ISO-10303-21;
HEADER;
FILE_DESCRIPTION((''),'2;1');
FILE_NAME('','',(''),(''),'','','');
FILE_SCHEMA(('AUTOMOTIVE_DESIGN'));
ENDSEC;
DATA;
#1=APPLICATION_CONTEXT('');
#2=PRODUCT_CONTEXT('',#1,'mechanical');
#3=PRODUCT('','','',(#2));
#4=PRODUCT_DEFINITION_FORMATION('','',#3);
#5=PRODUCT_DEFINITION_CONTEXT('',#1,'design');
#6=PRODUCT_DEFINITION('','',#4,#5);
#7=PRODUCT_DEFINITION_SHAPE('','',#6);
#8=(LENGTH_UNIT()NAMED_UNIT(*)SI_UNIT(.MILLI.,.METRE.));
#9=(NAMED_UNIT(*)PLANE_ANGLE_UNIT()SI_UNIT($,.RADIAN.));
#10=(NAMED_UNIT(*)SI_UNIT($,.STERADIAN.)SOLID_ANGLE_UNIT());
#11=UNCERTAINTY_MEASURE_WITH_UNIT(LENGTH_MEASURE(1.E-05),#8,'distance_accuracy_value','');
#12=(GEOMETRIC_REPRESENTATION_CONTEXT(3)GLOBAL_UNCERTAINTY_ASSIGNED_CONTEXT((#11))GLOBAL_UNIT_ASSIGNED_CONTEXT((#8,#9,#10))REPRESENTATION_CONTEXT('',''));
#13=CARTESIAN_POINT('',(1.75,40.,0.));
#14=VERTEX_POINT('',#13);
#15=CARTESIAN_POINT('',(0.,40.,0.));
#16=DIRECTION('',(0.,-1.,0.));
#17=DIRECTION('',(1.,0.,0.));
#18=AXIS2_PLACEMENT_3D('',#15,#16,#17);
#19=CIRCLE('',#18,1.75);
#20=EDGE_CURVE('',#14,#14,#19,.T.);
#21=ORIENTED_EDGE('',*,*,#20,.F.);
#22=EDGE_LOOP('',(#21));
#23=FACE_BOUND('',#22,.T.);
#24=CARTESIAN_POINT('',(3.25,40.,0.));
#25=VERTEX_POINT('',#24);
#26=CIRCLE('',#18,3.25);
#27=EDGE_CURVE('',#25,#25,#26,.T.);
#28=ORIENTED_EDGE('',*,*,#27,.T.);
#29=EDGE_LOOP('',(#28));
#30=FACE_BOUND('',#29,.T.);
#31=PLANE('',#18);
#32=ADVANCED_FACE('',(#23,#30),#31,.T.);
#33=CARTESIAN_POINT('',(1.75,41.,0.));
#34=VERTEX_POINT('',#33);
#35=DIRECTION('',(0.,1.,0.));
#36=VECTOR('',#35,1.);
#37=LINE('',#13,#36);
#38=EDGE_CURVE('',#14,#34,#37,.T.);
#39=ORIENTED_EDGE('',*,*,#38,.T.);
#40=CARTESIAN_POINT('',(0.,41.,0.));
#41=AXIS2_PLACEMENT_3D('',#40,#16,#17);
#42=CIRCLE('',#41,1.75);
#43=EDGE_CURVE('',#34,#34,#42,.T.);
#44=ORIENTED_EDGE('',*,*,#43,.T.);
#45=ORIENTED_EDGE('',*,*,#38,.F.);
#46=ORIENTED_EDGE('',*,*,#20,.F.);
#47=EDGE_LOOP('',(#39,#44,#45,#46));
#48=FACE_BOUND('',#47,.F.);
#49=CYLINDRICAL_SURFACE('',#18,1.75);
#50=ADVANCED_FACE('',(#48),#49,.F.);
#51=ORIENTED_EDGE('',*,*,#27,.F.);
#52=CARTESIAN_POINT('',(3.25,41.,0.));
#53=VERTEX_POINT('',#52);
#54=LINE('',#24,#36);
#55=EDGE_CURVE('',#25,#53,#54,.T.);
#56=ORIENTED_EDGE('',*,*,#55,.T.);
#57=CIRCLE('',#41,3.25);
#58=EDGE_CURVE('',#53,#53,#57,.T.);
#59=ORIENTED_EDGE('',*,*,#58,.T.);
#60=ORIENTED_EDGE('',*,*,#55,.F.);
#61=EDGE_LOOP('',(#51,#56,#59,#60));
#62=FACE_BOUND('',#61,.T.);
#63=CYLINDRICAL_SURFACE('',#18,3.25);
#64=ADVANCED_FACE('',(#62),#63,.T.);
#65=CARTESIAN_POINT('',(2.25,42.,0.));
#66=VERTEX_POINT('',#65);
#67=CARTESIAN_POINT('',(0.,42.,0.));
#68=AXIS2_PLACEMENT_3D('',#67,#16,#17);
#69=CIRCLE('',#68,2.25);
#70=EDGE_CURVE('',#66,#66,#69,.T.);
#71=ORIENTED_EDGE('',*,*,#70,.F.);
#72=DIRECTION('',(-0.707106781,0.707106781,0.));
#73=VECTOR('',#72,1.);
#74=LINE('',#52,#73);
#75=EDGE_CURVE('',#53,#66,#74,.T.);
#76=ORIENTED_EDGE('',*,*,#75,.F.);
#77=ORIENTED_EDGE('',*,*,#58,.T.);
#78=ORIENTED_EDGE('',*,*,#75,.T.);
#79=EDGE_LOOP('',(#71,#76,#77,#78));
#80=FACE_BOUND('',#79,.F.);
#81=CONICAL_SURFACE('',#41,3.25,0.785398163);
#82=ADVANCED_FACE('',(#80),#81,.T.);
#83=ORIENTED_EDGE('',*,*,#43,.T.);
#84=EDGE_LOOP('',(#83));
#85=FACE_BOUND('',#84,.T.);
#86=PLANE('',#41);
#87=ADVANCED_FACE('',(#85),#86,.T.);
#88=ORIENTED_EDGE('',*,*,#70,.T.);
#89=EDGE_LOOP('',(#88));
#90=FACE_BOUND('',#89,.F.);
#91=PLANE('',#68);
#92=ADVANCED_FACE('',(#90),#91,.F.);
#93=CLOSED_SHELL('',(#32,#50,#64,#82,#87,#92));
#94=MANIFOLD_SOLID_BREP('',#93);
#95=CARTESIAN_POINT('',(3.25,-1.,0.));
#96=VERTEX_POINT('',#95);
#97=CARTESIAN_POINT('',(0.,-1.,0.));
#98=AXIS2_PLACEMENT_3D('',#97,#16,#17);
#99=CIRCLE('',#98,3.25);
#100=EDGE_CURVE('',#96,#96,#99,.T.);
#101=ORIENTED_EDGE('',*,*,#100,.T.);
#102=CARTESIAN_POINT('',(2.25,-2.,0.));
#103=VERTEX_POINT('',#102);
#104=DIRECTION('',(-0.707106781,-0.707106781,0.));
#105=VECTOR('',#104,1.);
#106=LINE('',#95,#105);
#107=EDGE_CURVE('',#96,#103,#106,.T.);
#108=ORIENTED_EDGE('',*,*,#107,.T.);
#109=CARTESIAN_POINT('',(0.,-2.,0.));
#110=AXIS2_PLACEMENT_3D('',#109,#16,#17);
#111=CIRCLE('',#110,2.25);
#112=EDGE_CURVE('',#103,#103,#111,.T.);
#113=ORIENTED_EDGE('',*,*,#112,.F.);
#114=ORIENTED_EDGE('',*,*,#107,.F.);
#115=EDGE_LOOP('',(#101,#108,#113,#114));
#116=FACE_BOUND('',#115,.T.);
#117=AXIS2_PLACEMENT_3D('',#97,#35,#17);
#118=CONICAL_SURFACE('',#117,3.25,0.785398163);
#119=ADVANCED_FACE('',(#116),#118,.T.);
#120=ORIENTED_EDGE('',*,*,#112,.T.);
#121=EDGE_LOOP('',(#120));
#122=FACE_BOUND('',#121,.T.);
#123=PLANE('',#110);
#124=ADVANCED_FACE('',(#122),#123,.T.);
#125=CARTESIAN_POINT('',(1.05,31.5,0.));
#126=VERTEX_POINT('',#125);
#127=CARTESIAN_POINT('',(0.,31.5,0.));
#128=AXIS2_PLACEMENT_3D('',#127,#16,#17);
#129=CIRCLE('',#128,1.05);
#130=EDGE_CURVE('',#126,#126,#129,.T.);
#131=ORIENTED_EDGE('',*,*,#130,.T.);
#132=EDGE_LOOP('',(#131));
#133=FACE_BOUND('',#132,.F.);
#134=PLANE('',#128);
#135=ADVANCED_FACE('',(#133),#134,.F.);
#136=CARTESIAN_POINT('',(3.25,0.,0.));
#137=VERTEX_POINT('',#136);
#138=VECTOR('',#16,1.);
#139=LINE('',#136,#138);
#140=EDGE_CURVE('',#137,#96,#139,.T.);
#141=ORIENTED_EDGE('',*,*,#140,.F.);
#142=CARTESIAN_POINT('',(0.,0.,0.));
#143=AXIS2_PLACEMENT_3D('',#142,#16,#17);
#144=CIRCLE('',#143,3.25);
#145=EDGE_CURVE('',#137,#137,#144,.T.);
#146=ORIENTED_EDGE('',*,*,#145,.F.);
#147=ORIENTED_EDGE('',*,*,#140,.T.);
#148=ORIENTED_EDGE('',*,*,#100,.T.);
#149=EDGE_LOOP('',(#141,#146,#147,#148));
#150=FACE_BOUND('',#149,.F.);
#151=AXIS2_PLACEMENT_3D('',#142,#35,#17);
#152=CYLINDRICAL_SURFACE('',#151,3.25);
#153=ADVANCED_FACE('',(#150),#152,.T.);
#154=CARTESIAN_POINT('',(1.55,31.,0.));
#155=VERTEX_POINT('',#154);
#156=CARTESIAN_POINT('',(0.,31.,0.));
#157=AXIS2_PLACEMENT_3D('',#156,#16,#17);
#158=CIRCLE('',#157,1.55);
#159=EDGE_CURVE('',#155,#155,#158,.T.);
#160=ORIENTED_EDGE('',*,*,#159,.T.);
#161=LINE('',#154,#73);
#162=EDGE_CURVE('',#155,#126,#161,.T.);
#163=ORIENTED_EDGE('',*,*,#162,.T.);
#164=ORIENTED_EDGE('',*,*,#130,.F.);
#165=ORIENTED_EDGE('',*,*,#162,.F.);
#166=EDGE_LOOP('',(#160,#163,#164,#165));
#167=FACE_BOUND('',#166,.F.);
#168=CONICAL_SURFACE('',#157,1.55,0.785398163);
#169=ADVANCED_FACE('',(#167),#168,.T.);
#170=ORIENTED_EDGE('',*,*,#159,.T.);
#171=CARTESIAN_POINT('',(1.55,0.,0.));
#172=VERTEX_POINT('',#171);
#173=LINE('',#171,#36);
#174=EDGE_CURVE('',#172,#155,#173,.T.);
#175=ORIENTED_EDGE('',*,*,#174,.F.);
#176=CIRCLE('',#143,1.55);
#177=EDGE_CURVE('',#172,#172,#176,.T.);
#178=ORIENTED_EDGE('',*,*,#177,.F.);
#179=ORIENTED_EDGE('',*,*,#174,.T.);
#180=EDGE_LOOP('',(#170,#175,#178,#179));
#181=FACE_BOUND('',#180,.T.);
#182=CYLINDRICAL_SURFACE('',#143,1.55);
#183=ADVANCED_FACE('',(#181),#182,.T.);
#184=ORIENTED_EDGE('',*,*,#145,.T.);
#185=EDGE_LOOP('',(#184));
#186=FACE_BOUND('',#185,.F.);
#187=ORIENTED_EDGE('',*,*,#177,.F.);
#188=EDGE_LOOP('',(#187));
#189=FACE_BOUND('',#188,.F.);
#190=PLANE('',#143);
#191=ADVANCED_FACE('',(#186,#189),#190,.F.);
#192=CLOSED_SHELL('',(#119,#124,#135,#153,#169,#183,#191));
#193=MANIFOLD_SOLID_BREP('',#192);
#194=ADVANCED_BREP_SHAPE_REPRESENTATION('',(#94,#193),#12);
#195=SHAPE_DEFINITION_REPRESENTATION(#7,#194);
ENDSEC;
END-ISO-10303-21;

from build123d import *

# Parameters (mm, degrees)
F0_R     = 1.55
F1_DEPTH = 31.5
F0_R_2   = 3.25
F0_R_3   = 1.75
F2_DEPTH = 2
F3_SIZE  = 1
F4_SIZE  = 0.5
F5_START = -40
F5_DEPTH = 2
F6_START = -41
F6_DEPTH = 1
F7_SIZE  = 1


with BuildPart() as f1:
    # F0 (on Front) → F1 (new body)
    with BuildSketch(Plane.XZ):
        Circle(F0_R)
    extrude(amount=-F1_DEPTH)

    # F0 (on Front) → F2 (join)
    with BuildSketch(Plane.XZ):
        Circle(F0_R_2)
        Circle(F0_R_3, mode=Mode.SUBTRACT)
        Circle(F0_R_3)
        Circle(F0_R, mode=Mode.SUBTRACT)
        Circle(F0_R)
    extrude(amount=F2_DEPTH)

    # F3
    f3_edges = [f1.edges().sort_by_distance(p)[0] for p in [
        (-3.25, -2, 0),
    ]]
    chamfer(f3_edges, length=F3_SIZE)

    # F4
    f4_edges = [f1.edges().sort_by_distance(p)[0] for p in [
        (-1.55, 31.5, 0),
    ]]
    chamfer(f4_edges, length=F4_SIZE)


with BuildPart() as f5:
    # F0 (on Front) → F5 (new body)
    with BuildSketch(Plane.XZ.offset(F5_START)):
        Circle(F0_R_2)
        Circle(F0_R_3, mode=Mode.SUBTRACT)
    extrude(amount=-F5_DEPTH)

    # F0 (on Front) → F6 (join)
    with BuildSketch(Plane.XZ.offset(F6_START)):
        Circle(F0_R_3)
        Circle(F0_R, mode=Mode.SUBTRACT)
        Circle(F0_R)
    extrude(amount=-F6_DEPTH)

    # F7
    f7_edges = [f5.edges().sort_by_distance(p)[0] for p in [
        (-3.25, 42, 0),
    ]]
    chamfer(f7_edges, length=F7_SIZE)


solid = Compound([f1.part, f5.part])
